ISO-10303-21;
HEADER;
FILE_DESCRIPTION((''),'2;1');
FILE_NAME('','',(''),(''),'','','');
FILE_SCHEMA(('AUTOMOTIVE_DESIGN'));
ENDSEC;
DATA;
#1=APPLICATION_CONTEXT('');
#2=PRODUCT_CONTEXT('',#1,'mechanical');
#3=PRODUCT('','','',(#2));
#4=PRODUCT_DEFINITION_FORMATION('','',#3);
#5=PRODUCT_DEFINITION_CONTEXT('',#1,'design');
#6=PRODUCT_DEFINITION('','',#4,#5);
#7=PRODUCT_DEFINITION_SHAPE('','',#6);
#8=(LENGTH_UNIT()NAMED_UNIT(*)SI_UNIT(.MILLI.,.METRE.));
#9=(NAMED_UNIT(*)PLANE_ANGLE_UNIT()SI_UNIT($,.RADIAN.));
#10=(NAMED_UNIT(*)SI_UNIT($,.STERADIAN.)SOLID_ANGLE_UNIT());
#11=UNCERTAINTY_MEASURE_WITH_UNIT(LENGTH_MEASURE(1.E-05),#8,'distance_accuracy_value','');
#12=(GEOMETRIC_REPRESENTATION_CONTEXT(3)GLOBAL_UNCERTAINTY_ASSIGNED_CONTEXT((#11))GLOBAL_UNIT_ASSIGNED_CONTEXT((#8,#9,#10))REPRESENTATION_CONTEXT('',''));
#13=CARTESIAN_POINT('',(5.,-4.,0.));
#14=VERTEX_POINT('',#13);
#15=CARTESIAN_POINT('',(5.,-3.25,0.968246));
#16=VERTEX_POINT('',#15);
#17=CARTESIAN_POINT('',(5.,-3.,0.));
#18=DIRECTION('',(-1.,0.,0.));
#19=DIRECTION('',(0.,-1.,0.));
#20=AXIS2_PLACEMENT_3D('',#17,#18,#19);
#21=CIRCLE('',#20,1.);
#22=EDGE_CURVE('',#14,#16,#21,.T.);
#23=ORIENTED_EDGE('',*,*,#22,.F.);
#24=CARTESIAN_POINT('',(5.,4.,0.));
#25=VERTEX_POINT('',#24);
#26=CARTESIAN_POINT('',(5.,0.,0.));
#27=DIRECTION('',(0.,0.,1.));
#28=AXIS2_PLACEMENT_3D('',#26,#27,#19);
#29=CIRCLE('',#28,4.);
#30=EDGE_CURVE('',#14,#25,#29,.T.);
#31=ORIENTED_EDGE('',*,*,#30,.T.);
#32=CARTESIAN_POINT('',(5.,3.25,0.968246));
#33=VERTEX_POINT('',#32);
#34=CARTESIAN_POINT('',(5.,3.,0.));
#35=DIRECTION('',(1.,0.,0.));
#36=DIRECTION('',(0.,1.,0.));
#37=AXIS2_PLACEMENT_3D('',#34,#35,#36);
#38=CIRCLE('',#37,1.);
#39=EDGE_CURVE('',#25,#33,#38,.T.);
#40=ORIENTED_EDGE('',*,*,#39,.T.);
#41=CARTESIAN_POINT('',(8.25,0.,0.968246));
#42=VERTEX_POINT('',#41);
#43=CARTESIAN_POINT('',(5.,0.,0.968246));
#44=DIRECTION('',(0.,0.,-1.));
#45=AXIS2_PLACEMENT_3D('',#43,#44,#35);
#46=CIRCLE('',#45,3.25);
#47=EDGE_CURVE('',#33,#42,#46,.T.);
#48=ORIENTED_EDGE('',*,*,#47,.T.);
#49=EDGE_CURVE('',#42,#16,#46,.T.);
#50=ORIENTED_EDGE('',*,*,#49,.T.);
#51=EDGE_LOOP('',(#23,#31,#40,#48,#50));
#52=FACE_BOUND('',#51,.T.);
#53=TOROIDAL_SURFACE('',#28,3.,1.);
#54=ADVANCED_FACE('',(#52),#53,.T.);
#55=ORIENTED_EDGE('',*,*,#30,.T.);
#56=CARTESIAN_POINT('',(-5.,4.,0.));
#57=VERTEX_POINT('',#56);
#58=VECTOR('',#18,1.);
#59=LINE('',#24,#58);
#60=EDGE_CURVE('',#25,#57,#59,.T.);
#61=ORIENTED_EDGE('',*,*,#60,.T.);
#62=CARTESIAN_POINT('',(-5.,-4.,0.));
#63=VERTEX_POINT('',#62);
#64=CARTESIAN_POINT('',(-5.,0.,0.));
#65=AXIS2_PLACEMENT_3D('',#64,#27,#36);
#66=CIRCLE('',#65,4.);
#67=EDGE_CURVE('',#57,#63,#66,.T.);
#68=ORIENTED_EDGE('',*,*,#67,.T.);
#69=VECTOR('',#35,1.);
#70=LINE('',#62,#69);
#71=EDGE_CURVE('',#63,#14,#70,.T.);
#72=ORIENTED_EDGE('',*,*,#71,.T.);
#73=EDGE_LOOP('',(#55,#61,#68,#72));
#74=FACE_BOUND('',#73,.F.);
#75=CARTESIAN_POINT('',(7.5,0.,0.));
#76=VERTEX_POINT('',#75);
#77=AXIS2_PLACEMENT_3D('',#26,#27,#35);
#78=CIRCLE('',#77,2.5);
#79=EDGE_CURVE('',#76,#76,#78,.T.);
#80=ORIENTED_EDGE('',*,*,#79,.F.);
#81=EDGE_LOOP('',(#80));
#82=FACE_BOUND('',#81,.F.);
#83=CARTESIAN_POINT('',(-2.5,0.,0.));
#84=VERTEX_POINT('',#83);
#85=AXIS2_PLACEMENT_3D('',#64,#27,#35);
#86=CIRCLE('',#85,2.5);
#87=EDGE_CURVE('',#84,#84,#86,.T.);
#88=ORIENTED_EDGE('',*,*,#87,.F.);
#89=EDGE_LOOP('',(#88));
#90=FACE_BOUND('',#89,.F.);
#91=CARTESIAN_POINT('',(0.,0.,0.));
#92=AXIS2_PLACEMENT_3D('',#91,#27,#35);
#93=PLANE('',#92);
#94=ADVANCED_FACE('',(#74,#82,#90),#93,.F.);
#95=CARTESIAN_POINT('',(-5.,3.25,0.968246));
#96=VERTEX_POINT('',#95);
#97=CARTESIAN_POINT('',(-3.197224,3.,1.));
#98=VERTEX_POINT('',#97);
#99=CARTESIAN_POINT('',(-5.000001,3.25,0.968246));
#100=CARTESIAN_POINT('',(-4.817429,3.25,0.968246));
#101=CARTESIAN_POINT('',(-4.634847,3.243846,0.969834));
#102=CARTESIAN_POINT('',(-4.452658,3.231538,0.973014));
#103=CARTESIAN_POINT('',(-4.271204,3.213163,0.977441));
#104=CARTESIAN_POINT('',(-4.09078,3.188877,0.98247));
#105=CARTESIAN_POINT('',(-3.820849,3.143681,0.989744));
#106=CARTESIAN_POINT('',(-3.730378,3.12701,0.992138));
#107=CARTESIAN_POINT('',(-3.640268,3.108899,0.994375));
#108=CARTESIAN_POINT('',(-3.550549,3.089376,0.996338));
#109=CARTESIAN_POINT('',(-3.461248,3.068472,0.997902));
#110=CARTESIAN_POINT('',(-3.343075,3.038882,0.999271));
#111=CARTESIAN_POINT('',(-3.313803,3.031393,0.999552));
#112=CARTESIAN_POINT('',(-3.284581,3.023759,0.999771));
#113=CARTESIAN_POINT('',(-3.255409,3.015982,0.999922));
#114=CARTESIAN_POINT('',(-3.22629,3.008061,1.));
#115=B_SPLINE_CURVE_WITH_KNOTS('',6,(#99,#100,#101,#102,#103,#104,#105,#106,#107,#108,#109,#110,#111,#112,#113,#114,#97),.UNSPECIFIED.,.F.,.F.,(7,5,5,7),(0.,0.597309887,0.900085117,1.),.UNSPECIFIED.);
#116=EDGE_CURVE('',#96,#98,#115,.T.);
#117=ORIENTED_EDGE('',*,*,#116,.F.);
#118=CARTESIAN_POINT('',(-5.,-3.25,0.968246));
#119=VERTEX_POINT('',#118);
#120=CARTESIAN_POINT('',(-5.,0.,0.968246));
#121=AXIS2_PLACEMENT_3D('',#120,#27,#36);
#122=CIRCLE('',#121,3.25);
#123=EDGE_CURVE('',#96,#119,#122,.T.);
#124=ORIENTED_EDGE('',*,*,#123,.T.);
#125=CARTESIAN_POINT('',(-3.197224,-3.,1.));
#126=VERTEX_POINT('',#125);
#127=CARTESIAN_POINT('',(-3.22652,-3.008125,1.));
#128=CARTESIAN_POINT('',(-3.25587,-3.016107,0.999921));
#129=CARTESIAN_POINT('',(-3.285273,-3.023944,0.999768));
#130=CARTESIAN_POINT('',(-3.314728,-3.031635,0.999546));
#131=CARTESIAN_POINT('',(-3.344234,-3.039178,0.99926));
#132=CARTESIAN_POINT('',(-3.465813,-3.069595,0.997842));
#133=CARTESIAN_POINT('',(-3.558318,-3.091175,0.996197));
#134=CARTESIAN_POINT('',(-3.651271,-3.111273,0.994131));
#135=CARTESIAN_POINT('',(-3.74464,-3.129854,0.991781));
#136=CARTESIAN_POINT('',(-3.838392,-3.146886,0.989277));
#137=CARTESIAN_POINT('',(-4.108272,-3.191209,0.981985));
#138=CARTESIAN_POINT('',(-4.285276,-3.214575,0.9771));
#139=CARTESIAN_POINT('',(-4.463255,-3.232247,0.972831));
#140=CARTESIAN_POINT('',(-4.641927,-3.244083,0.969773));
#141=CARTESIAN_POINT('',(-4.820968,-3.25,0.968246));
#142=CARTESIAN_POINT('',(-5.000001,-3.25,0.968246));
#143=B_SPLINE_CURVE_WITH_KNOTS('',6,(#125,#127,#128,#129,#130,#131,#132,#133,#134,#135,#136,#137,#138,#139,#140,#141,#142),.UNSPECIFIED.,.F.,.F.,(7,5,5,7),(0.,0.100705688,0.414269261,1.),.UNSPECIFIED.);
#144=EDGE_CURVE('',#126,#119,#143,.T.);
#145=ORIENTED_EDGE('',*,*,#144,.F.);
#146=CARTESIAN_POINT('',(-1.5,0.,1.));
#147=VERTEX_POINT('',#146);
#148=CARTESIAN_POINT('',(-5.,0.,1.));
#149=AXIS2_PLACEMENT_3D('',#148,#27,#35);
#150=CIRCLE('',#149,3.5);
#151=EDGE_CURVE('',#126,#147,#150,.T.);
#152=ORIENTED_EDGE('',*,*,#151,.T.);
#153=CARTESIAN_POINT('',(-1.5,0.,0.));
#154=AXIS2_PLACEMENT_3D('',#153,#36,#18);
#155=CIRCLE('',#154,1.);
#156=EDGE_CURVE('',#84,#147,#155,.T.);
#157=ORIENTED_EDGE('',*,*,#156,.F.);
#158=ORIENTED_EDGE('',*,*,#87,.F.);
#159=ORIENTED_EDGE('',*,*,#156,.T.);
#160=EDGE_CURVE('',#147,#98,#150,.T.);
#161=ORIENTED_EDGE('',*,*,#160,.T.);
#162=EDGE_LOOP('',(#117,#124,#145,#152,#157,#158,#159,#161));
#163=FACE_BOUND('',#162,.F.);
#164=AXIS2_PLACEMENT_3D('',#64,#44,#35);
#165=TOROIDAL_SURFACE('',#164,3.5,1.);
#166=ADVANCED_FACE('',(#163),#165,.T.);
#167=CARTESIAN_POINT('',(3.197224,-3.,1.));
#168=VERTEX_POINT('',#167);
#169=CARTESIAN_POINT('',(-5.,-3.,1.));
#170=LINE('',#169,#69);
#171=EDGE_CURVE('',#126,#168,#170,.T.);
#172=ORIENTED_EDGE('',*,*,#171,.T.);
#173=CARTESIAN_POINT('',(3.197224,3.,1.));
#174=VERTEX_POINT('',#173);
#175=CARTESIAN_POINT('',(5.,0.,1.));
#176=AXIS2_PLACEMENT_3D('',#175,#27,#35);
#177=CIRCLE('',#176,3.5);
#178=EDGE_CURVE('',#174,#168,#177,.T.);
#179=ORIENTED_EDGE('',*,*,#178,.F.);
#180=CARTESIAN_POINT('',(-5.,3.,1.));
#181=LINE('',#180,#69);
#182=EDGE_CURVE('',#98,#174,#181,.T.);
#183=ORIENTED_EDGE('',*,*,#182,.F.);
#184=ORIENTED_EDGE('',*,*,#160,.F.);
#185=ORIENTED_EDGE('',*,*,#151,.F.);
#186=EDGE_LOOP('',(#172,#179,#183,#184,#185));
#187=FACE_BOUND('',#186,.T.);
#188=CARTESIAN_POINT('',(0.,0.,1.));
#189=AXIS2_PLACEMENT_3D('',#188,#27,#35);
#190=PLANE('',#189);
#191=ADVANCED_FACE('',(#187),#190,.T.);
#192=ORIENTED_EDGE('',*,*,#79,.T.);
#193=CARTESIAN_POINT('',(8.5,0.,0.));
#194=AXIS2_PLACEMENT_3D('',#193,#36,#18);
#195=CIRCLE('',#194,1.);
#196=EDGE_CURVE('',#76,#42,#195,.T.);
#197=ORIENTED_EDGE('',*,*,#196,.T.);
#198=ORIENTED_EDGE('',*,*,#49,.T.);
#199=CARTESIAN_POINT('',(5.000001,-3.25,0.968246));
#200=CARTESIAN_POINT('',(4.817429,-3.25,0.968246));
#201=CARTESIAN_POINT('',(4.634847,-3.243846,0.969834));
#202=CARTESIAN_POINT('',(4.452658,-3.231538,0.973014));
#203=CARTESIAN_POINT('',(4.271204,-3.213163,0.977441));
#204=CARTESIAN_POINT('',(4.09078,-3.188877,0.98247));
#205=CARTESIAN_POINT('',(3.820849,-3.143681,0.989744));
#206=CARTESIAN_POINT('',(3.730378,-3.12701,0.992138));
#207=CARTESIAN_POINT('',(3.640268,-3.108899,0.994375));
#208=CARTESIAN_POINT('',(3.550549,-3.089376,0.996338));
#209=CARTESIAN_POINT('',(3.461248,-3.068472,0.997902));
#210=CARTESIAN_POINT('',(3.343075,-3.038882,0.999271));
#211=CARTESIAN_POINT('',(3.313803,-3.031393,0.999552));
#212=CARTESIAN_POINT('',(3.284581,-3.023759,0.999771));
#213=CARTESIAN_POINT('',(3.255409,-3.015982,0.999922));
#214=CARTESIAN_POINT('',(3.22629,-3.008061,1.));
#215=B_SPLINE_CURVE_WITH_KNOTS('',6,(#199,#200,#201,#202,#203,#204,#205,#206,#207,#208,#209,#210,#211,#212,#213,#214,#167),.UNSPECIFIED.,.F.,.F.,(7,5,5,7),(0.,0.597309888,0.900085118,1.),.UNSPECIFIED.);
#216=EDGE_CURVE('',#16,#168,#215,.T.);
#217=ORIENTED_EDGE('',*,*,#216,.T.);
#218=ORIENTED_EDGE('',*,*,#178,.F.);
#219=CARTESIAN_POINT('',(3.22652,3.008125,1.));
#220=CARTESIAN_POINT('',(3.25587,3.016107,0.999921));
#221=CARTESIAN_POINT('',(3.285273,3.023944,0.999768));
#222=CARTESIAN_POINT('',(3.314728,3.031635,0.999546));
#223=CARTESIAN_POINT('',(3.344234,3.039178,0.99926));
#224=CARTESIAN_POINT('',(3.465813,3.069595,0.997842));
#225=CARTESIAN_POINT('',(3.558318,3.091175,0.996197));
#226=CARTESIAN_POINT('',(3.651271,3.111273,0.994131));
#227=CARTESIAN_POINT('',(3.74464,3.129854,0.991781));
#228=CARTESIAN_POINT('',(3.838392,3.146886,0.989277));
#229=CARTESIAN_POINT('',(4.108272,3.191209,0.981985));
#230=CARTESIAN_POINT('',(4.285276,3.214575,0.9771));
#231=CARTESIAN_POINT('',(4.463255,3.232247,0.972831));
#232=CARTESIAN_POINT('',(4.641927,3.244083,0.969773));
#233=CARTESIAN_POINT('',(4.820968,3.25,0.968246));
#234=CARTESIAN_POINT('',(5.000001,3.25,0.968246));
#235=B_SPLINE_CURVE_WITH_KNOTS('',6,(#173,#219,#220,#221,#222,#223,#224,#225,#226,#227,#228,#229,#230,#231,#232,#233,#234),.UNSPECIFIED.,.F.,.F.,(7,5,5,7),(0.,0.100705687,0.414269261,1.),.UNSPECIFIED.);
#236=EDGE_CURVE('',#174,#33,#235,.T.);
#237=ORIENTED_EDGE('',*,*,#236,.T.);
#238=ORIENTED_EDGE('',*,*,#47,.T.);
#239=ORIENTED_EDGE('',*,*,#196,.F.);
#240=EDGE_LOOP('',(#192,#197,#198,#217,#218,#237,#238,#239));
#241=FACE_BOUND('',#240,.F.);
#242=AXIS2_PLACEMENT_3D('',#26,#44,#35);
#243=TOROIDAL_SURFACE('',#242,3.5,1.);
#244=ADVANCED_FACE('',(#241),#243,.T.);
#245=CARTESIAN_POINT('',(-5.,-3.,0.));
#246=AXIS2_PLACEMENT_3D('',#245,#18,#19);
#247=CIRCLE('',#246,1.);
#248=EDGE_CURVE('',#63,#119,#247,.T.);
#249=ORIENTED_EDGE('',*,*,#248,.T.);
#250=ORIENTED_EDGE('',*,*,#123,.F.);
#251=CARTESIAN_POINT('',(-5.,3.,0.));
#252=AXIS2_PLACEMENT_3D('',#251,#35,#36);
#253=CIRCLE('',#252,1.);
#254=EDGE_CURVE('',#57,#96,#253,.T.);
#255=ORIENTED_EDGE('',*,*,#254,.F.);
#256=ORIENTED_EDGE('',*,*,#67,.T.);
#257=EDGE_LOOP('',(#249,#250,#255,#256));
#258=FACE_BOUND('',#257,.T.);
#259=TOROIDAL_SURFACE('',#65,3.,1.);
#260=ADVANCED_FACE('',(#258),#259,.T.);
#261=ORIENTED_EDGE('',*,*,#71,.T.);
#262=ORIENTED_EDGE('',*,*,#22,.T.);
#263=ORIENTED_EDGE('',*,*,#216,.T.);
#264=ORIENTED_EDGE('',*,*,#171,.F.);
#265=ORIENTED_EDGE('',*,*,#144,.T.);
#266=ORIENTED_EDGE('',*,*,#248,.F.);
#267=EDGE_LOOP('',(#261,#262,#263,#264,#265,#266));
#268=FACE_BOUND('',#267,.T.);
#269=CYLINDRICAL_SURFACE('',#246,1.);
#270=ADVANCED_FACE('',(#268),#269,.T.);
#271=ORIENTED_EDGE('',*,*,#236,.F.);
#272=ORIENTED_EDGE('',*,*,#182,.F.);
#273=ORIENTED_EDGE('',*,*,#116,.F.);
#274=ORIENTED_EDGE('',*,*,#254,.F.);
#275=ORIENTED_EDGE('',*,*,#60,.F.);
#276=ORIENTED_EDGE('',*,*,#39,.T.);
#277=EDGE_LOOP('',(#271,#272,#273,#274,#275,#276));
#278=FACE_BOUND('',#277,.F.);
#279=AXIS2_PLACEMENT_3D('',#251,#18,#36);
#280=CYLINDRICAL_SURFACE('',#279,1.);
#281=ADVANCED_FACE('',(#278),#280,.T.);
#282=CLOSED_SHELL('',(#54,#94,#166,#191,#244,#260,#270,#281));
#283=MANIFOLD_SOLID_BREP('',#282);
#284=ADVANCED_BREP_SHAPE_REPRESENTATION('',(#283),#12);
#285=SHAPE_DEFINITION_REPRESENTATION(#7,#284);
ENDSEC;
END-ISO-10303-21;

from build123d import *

# Parameters (mm, degrees)
F0_R         = 2.5
F1_DEPTH     = 1
F2_T1_DEPTH  = 10
F2_T4_ANGLE  = 180
F2_T10_ANGLE = 180


# Not quite as in the source:
# - a fillet or chamfer that OpenCascade refuses, or shapes differently, is made with other operations: its cross-section is extruded or revolved along the edge and cut away or added


with BuildPart() as f1:
    # F0 (on Top) → F1 (new body)
    with BuildSketch(Plane.XY):
        with BuildLine():
            Line((5, 4), (-5, 4))
            ThreePointArc((-5, 4), (-9, 0), (-5, -4))
            Line((-5, -4), (5, -4))
            ThreePointArc((5, -4), (9, 0), (5, 4))
        make_face()
        with Locations((-5, 0)):
            Circle(F0_R, mode=Mode.SUBTRACT)
        with Locations((5, 0)):
            Circle(F0_R, mode=Mode.SUBTRACT)
    extrude(amount=F1_DEPTH)

    # F2: fillet of radius 1 on 3 edges, made by hand

    # F2_s2 → F2_t1 (cut)
    with BuildSketch(Plane.YZ.offset(-5)):
        with BuildLine():
            ThreePointArc((4, 0), (3.7071067812, 0.7071067812), (3, 1))
            Line((3, 1), (4, 1))
            Line((4, 1), (4, 0))
        make_face()
        with BuildLine():
            ThreePointArc((-4, 0), (-3.7071067812, 0.7071067812), (-3, 1))
            Line((-3, 1), (-4, 1))
            Line((-4, 1), (-4, 0))
        make_face()
    extrude(amount=F2_T1_DEPTH, mode=Mode.SUBTRACT)

    # F2_s3 → F2_t4 (revolve, cut)
    with BuildSketch(Plane.YZ.offset(-5)):
        with BuildLine():
            ThreePointArc((4, 0), (3.7071067812, 0.7071067812), (3, 1))
            Line((3, 1), (4, 1))
            Line((4, 1), (4, 0))
        make_face()
    revolve(axis=Axis((-5, 0, 1), (0, 0, 1)), revolution_arc=F2_T4_ANGLE, mode=Mode.SUBTRACT)

    # F2_s5 → F2_t6 (revolve, cut)
    with BuildSketch(Plane.XZ):
        with BuildLine():
            ThreePointArc((-2.5, 0), (-2.2071067812, 0.7071067812), (-1.5, 1))
            Line((-1.5, 1), (-2.5, 1))
            Line((-2.5, 1), (-2.5, 0))
        make_face()
    revolve(axis=Axis((-5, 0, 1), (0, 0, 1)), mode=Mode.SUBTRACT)

    # F2_s7 → F2_t8 (revolve, cut)
    with BuildSketch(Plane.XZ):
        with BuildLine():
            ThreePointArc((7.5, 0), (7.7928932188, 0.7071067812), (8.5, 1))
            Line((8.5, 1), (7.5, 1))
            Line((7.5, 1), (7.5, 0))
        make_face()
    revolve(axis=Axis((5, 0, 1), (0, 0, 1)), mode=Mode.SUBTRACT)

    # F2_s9 → F2_t10 (revolve, cut)
    with BuildSketch(Plane.YZ.offset(5)):
        with BuildLine():
            ThreePointArc((-4, 0), (-3.7071067812, 0.7071067812), (-3, 1))
            Line((-3, 1), (-4, 1))
            Line((-4, 1), (-4, 0))
        make_face()
    revolve(axis=Axis((5, 0, 1), (0, 0, 1)), revolution_arc=F2_T10_ANGLE, mode=Mode.SUBTRACT)


solid = f1.part
